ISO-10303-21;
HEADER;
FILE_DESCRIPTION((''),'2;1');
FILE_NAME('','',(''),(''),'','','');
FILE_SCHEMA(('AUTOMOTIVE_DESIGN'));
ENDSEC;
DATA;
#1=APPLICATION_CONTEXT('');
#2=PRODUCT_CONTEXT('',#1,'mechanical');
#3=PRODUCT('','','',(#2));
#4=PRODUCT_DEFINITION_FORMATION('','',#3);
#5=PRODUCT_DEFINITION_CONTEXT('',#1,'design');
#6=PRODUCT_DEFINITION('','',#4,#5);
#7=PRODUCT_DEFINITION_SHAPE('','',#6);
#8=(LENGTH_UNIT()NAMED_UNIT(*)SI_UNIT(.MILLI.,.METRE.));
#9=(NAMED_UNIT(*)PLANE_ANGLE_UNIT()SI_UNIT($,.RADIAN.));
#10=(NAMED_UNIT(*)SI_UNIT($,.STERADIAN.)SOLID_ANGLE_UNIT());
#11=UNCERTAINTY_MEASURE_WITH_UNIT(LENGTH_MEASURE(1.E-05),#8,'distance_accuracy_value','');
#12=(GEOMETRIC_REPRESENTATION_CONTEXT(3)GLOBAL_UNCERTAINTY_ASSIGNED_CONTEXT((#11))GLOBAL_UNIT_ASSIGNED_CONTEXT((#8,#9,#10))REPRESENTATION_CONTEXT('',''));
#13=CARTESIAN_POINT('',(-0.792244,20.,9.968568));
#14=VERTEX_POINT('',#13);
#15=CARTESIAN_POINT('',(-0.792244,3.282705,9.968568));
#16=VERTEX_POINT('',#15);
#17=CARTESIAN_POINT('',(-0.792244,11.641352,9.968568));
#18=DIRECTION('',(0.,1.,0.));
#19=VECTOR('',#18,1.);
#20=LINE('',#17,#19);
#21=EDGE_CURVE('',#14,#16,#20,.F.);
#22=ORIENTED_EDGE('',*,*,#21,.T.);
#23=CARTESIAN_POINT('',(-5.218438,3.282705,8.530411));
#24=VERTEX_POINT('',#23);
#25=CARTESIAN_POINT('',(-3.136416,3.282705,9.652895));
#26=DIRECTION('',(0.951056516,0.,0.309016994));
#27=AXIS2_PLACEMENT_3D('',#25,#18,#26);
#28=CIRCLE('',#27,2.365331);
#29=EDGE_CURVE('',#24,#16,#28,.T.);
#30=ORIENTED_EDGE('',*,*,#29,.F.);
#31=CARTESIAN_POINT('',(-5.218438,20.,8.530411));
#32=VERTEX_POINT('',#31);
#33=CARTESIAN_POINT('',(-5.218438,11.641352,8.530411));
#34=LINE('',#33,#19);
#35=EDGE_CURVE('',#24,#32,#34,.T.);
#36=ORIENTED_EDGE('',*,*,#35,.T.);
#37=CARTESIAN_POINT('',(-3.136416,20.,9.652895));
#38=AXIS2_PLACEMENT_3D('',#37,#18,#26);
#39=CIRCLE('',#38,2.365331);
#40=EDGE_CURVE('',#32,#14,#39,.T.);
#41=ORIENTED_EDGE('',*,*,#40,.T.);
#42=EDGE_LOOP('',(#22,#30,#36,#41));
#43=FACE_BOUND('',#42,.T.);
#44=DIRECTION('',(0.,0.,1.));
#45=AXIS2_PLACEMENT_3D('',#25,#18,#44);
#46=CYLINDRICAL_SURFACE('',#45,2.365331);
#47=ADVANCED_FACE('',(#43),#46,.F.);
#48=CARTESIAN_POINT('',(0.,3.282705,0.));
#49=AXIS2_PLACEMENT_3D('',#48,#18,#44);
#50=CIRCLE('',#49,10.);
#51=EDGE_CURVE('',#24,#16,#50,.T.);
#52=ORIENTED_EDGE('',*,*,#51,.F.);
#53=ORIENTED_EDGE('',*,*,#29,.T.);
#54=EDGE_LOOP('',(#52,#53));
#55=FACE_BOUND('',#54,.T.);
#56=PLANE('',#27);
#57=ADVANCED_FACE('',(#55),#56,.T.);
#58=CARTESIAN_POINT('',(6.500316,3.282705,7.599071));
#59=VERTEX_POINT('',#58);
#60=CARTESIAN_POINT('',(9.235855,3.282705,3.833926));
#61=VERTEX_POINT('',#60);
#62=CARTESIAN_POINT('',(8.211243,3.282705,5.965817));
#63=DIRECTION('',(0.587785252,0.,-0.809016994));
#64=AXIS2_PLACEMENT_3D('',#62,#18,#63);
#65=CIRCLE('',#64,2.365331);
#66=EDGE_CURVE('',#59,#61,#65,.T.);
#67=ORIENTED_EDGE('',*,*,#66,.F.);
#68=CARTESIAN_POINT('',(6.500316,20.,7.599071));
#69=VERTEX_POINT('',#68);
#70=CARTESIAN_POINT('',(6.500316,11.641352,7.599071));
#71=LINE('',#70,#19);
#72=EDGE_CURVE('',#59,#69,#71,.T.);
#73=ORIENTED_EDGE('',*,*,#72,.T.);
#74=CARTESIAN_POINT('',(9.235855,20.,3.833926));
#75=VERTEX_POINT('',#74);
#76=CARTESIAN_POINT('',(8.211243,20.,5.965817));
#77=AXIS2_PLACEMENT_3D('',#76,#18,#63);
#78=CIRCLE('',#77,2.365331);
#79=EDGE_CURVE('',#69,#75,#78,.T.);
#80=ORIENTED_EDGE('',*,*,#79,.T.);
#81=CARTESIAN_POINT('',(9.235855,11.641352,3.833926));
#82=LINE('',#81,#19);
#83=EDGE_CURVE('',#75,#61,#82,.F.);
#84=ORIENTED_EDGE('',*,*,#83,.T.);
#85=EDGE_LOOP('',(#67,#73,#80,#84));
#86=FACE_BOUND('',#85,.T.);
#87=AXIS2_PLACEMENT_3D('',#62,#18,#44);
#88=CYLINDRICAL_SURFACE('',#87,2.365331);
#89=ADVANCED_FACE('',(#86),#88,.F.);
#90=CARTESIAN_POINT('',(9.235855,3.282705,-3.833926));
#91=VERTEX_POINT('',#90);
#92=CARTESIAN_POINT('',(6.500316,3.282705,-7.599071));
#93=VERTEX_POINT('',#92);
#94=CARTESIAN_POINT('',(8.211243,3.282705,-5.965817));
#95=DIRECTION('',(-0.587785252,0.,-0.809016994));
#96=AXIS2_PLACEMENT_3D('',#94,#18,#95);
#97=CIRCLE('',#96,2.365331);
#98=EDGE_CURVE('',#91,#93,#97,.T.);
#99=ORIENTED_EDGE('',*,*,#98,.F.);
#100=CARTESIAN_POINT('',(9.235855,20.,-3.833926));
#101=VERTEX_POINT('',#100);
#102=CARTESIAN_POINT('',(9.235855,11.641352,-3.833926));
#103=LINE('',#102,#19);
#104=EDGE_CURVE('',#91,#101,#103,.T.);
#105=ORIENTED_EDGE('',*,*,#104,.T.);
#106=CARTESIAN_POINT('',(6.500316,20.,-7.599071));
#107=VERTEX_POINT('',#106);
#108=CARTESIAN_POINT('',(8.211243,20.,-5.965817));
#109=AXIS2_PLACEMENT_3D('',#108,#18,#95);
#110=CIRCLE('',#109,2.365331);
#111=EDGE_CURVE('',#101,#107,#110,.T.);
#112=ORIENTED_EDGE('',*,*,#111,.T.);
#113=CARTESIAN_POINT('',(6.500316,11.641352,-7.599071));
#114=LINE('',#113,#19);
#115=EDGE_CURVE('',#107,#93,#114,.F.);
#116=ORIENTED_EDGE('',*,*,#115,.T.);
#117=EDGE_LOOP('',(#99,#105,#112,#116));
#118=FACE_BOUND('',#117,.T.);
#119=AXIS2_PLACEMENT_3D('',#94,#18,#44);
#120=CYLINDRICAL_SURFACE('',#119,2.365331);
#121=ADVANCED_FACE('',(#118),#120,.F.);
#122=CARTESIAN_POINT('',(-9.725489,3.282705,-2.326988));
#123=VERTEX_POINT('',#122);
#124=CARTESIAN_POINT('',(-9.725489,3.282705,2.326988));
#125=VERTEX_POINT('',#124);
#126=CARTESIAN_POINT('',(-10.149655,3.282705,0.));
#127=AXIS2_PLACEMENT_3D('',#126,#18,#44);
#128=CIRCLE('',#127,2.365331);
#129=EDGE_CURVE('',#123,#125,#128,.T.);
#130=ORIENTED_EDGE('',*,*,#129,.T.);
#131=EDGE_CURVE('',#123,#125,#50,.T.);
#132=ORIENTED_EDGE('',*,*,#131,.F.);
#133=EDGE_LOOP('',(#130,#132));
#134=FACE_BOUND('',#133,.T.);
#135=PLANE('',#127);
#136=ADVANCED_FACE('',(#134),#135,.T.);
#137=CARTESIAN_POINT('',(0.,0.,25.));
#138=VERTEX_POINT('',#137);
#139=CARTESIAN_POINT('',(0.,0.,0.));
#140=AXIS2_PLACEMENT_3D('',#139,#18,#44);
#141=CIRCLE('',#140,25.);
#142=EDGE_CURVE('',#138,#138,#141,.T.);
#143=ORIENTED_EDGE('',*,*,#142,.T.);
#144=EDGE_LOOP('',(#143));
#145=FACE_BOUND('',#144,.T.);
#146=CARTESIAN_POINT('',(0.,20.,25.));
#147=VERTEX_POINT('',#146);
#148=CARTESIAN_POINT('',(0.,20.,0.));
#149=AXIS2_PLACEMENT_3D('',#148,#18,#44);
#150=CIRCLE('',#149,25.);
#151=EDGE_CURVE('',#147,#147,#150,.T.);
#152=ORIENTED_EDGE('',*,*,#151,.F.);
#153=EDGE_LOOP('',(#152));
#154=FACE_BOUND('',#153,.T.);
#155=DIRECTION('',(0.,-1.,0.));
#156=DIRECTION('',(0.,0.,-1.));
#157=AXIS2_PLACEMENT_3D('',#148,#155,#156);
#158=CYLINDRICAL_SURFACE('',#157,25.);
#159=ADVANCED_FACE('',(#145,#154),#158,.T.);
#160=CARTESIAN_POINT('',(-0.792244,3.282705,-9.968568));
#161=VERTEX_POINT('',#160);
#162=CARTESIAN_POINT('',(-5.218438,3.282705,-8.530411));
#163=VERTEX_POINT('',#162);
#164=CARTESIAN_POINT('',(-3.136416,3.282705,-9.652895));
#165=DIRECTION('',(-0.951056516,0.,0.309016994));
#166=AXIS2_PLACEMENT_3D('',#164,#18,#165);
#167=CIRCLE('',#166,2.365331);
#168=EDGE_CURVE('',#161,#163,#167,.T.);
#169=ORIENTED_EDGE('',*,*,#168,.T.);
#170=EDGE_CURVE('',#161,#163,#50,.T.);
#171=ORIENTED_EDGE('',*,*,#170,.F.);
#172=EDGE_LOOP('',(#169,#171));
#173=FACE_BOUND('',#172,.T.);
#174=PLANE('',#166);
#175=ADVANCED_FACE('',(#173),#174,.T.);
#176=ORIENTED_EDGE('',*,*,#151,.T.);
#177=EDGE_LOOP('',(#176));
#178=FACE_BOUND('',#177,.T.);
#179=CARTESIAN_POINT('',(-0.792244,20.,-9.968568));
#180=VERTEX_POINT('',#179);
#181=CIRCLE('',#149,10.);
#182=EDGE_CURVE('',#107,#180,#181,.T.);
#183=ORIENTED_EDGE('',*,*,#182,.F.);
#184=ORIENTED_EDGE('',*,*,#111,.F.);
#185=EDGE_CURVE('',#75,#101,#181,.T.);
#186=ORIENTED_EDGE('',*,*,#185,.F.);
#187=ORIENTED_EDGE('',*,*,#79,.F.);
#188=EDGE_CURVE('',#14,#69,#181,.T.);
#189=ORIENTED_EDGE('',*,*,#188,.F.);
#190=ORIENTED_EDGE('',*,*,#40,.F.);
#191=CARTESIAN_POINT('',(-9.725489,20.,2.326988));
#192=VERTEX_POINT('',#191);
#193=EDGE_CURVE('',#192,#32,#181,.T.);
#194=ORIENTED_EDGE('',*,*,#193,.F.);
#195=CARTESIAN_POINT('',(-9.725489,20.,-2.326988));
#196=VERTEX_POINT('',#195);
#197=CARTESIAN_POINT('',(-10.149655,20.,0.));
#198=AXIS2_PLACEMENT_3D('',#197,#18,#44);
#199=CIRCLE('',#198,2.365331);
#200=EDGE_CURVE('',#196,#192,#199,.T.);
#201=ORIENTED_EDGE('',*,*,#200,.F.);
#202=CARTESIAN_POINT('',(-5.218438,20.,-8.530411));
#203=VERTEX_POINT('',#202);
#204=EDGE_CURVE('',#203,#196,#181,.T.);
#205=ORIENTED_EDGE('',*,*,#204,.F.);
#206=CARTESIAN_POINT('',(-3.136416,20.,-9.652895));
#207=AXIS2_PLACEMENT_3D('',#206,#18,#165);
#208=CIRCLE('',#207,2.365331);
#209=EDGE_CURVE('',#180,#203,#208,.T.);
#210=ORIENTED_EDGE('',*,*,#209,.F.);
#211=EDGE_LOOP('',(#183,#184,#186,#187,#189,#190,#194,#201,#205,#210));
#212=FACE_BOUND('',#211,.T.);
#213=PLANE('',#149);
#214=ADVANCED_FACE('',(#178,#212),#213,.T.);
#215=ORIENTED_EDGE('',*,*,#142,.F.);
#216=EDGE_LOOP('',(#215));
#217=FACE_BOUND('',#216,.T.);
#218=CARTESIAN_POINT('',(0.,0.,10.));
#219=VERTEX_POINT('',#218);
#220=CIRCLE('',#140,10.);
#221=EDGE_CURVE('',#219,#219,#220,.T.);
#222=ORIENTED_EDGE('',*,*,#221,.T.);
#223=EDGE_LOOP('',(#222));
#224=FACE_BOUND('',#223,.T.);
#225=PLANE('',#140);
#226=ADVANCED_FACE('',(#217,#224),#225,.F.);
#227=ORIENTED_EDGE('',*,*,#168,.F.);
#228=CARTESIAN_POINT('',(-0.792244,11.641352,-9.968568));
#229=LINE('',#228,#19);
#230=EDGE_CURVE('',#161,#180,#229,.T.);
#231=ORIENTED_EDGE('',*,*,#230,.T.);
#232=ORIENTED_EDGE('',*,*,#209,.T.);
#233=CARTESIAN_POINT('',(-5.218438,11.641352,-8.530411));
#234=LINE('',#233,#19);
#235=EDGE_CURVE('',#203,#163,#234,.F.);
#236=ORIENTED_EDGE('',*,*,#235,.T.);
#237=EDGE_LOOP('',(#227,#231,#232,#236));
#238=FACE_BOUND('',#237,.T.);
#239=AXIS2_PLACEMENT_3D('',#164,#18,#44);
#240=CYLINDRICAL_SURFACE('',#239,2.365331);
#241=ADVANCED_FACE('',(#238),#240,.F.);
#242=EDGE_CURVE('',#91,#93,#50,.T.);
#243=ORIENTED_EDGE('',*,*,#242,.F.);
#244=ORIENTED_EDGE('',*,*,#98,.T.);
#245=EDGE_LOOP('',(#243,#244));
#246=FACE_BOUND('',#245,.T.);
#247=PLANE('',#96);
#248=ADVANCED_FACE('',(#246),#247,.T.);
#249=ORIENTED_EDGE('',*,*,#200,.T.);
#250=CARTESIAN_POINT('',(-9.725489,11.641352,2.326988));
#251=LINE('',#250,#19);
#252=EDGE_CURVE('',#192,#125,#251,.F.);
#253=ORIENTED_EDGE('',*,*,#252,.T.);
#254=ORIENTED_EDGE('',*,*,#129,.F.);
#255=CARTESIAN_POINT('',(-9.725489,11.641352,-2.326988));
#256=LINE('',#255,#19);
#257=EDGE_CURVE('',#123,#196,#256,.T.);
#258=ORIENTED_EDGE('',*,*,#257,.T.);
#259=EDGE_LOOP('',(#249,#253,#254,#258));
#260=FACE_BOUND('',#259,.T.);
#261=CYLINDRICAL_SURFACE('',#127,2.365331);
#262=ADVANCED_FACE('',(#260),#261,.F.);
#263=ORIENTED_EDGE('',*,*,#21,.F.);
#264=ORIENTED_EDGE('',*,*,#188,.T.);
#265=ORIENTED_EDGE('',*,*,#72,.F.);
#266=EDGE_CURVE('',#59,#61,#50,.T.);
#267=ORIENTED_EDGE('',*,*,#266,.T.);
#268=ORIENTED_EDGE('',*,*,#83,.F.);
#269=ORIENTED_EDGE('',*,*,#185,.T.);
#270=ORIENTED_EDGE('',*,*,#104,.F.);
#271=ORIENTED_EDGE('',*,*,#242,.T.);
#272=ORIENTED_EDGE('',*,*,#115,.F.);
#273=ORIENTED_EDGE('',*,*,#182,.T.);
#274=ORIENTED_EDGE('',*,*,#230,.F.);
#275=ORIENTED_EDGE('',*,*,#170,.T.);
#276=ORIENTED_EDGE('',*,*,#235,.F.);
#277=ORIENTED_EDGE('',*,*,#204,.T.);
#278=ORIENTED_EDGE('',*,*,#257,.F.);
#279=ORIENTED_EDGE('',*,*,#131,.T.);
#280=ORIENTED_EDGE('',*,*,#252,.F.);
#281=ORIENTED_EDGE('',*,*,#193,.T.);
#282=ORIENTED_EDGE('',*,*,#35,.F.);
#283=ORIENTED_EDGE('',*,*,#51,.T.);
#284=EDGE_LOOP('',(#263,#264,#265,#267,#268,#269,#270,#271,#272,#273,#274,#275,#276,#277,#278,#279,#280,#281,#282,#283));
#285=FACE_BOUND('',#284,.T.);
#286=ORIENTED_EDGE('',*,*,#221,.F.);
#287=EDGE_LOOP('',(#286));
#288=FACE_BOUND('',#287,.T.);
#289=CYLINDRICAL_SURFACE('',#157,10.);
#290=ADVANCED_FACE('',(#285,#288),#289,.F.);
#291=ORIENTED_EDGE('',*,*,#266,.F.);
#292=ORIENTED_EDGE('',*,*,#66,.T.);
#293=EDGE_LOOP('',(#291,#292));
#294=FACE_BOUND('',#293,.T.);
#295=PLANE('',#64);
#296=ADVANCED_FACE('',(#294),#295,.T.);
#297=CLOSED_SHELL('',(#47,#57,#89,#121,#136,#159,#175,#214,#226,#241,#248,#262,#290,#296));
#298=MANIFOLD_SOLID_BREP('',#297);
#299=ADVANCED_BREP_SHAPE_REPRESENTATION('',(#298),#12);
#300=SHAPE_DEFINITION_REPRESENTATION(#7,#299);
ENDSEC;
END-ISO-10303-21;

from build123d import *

# Parameters (mm, degrees)
SKETCH1_R           = 25
BOSS_EXTRUDE1_DEPTH = 20
SKETCH2_R           = 10
CUT_EXTRUDE1_DEPTH  = 41.620192023
SKETCH3_R           = 2.365330637
CUT_EXTRUDE2_DEPTH  = 16.717295413
CIRPATTERN1_COUNT   = 5


with BuildPart() as part:
    # Sketch1 → Boss-Extrude1 (new body)
    with BuildSketch(Plane(origin=(0, 0, 0), x_dir=(1, 0, 0), z_dir=(0, 1, 0))):
        Circle(SKETCH1_R)
    extrude(amount=BOSS_EXTRUDE1_DEPTH)

    # Sketch2 → Cut-Extrude1 (cut, through all)
    with BuildSketch(Plane(origin=(0, 0, 0), x_dir=(1, 0, 0), z_dir=(0, 1, 0))):
        Circle(SKETCH2_R)
    extrude(amount=CUT_EXTRUDE1_DEPTH, mode=Mode.SUBTRACT)

    # Sketch3 → Cut-Extrude2 (cut)
    with BuildSketch(Plane(origin=(0, 20, 0), x_dir=(1, 0, 0), z_dir=(0, 1, 0))):
        with Locations((-10.149654885, 0)):
            Circle(SKETCH3_R)
    cut_extrude2 = extrude(amount=-CUT_EXTRUDE2_DEPTH, mode=Mode.SUBTRACT)

    # CirPattern1: Cut-Extrude2 ×5 about axis
    cirpattern1_axis = Axis((0, 0, 0), (0, 1, 0))
    for i in range(1, CIRPATTERN1_COUNT):
        add(cut_extrude2.rotate(cirpattern1_axis, i * 360 / CIRPATTERN1_COUNT), mode=Mode.SUBTRACT)


solid = part.part
